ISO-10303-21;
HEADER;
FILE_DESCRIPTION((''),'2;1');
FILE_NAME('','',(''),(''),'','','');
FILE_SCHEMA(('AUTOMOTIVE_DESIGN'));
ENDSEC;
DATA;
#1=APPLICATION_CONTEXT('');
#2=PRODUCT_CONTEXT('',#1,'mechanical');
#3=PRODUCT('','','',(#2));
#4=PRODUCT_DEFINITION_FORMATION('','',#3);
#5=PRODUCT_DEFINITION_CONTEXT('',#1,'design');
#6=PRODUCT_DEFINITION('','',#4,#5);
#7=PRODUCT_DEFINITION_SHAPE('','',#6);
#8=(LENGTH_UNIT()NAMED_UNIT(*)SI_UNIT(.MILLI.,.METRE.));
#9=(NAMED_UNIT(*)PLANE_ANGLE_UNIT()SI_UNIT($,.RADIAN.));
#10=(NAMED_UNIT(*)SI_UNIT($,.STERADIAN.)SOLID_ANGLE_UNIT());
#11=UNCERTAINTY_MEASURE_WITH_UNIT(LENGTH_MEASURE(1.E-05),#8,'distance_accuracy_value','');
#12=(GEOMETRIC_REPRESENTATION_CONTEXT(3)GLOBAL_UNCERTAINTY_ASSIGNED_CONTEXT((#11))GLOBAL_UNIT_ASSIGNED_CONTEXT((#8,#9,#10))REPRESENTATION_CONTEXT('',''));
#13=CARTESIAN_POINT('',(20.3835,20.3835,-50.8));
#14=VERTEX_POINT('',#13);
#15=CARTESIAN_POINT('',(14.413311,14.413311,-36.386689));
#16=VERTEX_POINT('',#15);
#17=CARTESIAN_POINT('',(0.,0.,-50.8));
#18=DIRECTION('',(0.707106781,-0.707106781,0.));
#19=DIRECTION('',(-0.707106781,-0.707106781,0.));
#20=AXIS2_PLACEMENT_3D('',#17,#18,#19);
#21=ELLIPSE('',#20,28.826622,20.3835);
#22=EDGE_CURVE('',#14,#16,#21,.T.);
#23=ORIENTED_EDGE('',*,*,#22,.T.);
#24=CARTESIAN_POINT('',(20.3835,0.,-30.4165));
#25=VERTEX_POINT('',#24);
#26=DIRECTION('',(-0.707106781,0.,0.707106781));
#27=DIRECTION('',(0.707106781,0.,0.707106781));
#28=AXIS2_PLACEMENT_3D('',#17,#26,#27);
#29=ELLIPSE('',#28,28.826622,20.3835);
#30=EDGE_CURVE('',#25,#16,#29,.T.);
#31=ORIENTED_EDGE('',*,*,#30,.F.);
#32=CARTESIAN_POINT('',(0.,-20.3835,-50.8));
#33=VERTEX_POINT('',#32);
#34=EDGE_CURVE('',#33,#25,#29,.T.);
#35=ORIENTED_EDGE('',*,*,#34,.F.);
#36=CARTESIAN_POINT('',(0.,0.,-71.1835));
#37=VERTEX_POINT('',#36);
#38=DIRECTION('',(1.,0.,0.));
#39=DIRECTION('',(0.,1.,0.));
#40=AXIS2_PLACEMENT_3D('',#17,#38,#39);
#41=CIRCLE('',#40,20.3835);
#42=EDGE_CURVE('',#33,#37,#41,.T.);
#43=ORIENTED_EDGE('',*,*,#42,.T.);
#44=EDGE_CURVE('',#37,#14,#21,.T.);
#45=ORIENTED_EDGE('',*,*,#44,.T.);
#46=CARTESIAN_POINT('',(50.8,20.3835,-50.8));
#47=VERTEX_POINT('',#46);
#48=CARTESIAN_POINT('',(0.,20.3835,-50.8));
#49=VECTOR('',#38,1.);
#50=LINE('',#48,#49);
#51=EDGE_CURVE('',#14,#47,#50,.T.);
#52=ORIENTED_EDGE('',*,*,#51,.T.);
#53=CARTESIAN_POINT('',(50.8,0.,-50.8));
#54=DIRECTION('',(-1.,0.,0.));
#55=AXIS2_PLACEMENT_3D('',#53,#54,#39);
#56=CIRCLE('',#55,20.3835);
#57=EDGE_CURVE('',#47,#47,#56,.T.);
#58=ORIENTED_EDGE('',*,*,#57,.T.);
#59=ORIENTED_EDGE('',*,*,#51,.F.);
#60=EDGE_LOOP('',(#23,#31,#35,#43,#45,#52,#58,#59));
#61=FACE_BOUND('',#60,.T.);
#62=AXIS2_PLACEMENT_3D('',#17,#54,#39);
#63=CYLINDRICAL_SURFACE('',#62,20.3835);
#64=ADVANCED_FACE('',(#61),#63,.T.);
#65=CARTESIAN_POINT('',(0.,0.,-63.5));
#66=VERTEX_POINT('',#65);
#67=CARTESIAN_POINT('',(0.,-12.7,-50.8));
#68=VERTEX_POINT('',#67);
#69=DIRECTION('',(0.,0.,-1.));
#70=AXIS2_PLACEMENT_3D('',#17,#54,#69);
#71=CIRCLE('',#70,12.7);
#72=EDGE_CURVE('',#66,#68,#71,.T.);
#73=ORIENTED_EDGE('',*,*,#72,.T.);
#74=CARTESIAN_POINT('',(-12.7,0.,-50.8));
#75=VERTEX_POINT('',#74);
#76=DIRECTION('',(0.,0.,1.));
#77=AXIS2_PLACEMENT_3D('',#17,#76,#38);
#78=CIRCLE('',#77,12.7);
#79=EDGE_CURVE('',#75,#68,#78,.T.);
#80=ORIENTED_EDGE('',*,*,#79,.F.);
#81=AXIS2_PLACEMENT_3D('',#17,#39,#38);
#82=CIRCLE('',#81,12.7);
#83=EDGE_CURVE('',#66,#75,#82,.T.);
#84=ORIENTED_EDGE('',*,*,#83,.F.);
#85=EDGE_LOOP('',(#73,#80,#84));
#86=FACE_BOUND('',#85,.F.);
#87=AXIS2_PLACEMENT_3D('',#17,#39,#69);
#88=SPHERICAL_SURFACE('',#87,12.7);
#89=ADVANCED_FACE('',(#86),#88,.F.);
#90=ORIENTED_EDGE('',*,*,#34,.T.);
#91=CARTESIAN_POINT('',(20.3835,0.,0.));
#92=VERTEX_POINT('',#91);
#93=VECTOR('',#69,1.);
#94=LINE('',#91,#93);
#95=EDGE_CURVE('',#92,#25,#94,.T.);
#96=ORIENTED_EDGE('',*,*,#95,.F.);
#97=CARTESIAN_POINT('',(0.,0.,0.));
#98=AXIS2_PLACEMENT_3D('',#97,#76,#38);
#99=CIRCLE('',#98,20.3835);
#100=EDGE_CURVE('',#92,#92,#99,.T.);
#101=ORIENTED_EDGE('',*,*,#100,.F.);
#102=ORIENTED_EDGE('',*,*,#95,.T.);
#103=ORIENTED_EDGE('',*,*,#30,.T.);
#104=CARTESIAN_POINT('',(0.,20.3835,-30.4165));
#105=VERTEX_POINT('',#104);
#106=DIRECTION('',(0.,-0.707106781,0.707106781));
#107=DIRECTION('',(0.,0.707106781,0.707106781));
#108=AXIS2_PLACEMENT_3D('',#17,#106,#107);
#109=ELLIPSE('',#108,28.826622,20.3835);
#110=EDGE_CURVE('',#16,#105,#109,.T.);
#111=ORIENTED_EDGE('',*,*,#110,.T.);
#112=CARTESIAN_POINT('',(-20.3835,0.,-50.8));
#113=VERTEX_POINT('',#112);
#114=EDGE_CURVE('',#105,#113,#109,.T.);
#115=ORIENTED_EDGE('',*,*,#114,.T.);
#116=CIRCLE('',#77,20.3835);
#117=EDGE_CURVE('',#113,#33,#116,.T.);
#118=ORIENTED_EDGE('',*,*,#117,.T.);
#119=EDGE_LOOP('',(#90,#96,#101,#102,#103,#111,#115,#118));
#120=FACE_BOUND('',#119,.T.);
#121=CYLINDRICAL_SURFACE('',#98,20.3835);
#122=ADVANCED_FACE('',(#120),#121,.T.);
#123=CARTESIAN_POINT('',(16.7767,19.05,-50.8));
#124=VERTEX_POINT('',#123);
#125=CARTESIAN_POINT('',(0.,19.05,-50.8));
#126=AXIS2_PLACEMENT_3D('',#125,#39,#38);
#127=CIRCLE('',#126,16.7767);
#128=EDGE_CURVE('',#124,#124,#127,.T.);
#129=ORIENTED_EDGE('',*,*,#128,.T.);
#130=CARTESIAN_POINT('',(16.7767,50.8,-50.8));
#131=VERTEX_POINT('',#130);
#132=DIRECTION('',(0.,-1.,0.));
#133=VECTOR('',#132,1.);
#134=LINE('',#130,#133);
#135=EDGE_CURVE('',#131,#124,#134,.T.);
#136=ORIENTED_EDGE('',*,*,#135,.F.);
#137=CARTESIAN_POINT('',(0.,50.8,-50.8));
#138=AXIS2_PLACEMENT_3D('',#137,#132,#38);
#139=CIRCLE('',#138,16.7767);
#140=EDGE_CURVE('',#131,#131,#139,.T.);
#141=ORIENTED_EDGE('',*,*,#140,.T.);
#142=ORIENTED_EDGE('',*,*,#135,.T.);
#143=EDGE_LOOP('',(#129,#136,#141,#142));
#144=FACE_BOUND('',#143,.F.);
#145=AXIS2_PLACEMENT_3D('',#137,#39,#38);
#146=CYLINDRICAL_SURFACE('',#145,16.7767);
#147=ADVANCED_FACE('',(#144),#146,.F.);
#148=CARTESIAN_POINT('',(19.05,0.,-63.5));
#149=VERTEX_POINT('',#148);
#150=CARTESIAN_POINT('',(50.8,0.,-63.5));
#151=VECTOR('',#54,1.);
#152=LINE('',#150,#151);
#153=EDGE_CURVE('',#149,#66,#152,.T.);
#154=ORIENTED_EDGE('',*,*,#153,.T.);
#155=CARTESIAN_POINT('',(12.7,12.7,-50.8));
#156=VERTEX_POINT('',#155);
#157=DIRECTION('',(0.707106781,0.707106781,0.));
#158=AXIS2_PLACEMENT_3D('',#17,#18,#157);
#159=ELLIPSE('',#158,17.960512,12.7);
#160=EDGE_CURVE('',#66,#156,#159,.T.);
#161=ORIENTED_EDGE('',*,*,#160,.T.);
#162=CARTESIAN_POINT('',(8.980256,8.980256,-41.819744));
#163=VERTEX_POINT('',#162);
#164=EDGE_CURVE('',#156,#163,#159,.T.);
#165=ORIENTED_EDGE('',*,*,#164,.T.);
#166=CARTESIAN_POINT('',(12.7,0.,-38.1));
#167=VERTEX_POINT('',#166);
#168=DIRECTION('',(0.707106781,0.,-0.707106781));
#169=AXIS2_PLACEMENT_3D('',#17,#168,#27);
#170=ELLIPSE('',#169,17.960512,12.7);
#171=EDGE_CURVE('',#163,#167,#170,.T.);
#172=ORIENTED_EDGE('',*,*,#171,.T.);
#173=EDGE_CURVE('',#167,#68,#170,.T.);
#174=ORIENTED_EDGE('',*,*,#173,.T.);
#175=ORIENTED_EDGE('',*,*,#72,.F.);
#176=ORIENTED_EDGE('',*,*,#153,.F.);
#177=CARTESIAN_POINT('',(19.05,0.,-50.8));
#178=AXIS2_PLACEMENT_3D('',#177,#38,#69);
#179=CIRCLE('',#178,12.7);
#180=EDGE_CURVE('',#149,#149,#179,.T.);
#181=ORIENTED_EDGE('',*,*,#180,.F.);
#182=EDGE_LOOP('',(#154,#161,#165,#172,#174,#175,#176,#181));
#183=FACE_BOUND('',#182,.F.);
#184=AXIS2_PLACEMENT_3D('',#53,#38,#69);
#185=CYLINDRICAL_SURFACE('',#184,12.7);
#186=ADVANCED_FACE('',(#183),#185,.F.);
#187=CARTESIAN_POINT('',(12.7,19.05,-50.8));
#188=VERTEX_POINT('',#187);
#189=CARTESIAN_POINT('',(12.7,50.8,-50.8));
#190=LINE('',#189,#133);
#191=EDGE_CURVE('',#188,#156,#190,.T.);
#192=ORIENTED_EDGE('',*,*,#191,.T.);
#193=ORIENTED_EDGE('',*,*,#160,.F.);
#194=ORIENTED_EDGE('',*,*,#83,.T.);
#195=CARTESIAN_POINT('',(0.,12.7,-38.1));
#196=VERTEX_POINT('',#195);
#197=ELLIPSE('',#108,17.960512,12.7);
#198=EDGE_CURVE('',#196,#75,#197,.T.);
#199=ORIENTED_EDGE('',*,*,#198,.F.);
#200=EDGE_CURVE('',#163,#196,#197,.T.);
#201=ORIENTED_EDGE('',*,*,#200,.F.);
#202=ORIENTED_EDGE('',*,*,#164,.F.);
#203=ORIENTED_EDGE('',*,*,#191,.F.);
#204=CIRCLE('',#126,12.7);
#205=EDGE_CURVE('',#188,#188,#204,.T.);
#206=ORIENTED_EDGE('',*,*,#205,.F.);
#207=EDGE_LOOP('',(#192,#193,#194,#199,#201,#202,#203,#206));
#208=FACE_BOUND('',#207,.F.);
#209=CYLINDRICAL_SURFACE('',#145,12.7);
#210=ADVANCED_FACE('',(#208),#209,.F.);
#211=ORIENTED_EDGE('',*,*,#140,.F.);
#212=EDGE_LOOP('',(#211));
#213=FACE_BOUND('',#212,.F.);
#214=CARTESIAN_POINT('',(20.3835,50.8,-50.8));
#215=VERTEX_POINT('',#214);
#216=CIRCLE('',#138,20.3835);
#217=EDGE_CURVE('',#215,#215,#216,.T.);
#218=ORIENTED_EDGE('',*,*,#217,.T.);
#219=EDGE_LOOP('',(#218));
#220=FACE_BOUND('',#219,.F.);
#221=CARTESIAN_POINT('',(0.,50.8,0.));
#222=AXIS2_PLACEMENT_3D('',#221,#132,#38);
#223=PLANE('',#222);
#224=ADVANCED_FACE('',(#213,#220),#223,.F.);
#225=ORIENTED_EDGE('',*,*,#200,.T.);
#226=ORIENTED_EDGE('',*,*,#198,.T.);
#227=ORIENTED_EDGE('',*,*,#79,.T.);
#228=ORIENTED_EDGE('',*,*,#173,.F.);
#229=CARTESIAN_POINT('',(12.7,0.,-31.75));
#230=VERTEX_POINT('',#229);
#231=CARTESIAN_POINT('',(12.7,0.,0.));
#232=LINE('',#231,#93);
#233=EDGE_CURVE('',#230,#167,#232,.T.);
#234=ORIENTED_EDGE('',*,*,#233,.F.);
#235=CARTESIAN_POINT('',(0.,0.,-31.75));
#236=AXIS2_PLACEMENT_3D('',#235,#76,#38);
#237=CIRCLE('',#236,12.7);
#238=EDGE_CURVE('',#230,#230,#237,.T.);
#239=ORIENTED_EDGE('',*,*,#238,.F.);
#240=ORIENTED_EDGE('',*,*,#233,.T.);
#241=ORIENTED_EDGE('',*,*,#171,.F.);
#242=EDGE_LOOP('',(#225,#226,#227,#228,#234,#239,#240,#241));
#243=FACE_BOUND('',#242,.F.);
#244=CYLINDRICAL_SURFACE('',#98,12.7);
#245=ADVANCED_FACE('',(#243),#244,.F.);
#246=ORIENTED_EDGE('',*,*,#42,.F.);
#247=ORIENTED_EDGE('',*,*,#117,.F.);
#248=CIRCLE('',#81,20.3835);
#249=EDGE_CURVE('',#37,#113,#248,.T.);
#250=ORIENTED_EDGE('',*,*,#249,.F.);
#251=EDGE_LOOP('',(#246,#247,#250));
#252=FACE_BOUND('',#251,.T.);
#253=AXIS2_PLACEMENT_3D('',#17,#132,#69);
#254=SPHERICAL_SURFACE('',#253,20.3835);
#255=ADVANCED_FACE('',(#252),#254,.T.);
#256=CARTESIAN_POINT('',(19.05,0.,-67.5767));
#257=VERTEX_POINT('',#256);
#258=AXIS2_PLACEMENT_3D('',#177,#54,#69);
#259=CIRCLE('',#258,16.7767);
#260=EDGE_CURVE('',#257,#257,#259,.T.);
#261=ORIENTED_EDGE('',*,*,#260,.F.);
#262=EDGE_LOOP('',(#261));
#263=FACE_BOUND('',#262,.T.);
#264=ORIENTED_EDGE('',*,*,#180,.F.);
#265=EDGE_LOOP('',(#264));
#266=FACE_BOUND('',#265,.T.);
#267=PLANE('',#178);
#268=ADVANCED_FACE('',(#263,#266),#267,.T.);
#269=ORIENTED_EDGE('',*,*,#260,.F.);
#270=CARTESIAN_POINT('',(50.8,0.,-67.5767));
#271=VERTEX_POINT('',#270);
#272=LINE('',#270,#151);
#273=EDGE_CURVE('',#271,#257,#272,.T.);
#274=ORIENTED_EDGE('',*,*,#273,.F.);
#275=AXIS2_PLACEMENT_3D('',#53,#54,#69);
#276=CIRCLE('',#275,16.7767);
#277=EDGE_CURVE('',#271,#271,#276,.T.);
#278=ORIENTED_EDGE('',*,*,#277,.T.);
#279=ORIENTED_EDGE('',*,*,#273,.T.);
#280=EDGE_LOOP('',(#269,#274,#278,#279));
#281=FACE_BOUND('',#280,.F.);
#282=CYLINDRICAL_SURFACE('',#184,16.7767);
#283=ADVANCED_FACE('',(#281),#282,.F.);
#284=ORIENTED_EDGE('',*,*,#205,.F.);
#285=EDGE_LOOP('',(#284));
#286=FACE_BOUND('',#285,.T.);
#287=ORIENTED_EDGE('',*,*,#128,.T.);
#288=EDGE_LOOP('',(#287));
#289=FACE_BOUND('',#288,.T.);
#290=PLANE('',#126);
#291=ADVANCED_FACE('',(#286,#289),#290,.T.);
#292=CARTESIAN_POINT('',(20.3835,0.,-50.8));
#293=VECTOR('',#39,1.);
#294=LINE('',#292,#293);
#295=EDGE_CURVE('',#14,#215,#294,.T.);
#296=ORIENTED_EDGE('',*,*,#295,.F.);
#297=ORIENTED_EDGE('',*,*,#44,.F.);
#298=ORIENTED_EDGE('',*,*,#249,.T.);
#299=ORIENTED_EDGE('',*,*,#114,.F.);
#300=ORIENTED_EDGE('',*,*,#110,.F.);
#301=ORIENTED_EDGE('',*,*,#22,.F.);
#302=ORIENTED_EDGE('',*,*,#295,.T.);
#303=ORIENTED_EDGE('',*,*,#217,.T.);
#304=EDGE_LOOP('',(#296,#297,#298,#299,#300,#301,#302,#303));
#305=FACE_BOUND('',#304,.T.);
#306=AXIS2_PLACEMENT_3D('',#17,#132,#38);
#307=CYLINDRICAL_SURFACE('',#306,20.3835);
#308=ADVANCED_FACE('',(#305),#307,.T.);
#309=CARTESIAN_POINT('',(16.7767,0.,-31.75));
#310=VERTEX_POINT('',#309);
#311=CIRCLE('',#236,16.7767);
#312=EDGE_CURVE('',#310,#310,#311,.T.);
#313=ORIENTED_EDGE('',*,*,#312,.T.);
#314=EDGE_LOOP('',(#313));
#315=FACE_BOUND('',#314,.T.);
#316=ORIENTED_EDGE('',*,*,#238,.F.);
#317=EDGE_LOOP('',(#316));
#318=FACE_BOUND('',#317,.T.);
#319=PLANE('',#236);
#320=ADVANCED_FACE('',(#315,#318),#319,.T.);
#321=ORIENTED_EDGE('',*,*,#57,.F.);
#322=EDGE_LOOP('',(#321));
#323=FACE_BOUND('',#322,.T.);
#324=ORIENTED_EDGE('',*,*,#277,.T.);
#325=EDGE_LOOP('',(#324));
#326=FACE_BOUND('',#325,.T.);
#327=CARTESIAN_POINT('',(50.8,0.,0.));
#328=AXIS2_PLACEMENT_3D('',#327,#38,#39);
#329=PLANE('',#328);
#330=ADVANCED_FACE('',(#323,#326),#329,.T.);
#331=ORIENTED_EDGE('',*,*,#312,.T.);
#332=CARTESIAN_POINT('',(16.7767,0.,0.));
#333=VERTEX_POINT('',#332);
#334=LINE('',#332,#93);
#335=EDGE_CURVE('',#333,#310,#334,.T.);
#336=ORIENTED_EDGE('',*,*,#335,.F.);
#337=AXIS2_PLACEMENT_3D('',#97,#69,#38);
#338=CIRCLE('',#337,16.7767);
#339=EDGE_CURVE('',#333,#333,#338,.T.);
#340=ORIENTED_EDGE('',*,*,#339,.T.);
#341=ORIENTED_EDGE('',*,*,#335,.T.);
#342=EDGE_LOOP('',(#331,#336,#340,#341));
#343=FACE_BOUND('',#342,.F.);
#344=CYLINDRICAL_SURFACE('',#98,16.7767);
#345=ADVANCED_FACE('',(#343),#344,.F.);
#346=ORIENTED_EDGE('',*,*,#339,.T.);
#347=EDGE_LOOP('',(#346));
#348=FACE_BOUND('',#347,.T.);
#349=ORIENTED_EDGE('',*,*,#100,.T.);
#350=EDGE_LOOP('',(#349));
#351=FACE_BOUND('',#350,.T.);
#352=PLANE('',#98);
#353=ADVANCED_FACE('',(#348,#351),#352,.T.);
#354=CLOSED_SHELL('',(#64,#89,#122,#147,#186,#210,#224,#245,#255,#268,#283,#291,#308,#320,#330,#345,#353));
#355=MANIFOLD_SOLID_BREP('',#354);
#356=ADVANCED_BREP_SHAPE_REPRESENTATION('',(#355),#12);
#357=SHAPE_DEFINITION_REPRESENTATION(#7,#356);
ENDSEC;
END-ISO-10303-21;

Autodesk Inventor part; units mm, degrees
ref_plane "YZ Plane" through (0, 0, 0) normal (1, 0, 0) x (0, 1, 0)
sketch "Sketch18" plane through (0, 0, 0) normal (0, 0, 1) x (1, 0, 0)
  circle A0 centre (0, 0) radius 20.3835
  dimension "d50" = 40.767
extrude "Extrusion10" add sketch "Sketch18" against normal blind 50.8
sketch "Sketch24" plane through (0, 0, 0) normal (0, 0, 1) x (1, 0, 0)
  line L0 (0, 0) -> (20.3835, 0)
  circle A0 centre (0, 0) radius 20.3835 projected
  line L1 (0, 0) -> (0, 20.3835)
ref_plane "Work Plane16" through (0, 0, 0) normal (1, 0, 0) x (0, 1, 0)
ref_plane "Work Plane17" through (0, 0, 0) normal (0, -1, 0) x (1, 0, 0)
sketch "Sketch25" plane through (0, 0, 0) normal (1, 0, 0) x (0, 1, 0)
  line L0 (-20.3835, -50.8) -> (20.3835, -50.8) projected
  circle A0 centre (0, -50.8) radius 20.3835
  point P0 (0, 0)
  dimension "d67" = 40.767
sketch "Sketch26" plane through (0, 0, 0) normal (0, -1, 0) x (1, 0, 0)
  line L0 (-20.3835, -50.8) -> (20.3835, -50.8) projected
  circle A0 centre (0, -50.8) radius 20.3835
  point P0 (0, 0)
extrude "Extrusion14" add sketch "Sketch26" against normal blind 50.8
extrude "Extrusion15" add sketch "Sketch25" along normal blind 50.8
sketch "Sketch27" plane through (0, 0, 0) normal (-1, 0, 0) x (0, 0, 1)
  line L0 (-50.8, 0) -> (-50.8, -20.3835) projected
  line L1 (-50.8, 0) -> (-50.8, -20.3835)
  circle A0 centre (-50.8, 0) radius 20.3835 projected
  line L2 (-50.8, 0) -> (-71.1835, 0) projected
  line L3 (-50.8, 0) -> (-71.1835, 0)
  arc A1 (-71.1835, 0) -> (-50.8, -20.3835) centre (-50.8, 0) ccw
  point P0 (0, 0)
revolve "Revolution12" add sketch "Sketch27" angle 90 about axis through (0, 0, -50.8) along (0, 1, 0) picked at (-52.3119, -13.4186) contours L0 A0 L2
sketch "Sketch28" plane through (0, 0, 0) normal (0, 0, 1) x (1, 0, 0)
  line L0 (20.3835, 20.3835) -> (0, 0) projected
  circle A0 centre (0, 0) radius 12.7
  line L1 (0, 0) -> (0, -20.3835) projected
  circle A1 centre (0, 0) radius 16.7767
  point P0 (14.4133, 14.4133)
  dimension "d73" = 25.4
  dimension "d74" = 33.5534
sketch "Sketch29" plane through (0, 50.8, -50.8) normal (0, 1, 0) x (1, 0, 0)
  line L0 (0, 20.3835) -> (0, 0) projected
  circle A0 centre (0, 0) radius 12.7
  line L1 (0, 0) -> (-20.3835, 0) projected
  circle A1 centre (0, 0) radius 16.7767
  point P0 (0, -50.8)
  dimension "d75" = 25.4
  dimension "d76" = 33.5534
sketch "Sketch30" plane through (50.8, 0, -50.8) normal (1, 0, 0) x (0, 0, -1)
  circle A0 centre (0, 0) radius 20.3835 projected
  circle A1 centre (0, 0) radius 12.7
  line L0 (-20.3835, 20.3835) -> (0, 0) projected
  circle A2 centre (0, 0) radius 16.7767
  point P0 (-50.8, 0)
  point P1 (-14.4133, 14.4133)
  dimension "d77" = 25.4
  dimension "d78" = 33.5534
extrude "Extrusion16" cut sketch "Sketch30" against normal blind 50.8 contours A1
extrude "Extrusion17" cut sketch "Sketch28" against normal blind 50.8 contours A0 L1 L0 | L0 L1 A0
extrude "Extrusion18" cut sketch "Sketch29" against normal blind 50.8 contours A0 L1 L0 | L0 L1 A0
extrude "Extrusion19" cut sketch "Sketch30" against normal blind 31.75 contours A2
extrude "Extrusion20" cut sketch "Sketch28" against normal blind 31.75 contours A1 L1 A0 L0 | L0 A0 L1 A1
extrude "Extrusion21" cut sketch "Sketch29" against normal blind 31.75 contours A1 L1 A0 L0 | L0 A0 L1 A1
sketch "Sketch31" plane through (0, 0, -50.8) normal (1, 0, 0) x (0, 0, -1)
  line L0 (12.7, 0) -> (0, 0) projected
  line L1 (0, 0) -> (0, -12.7) projected
  arc A0 (0, -12.7) -> (12.7, 0) centre (0, 0) ccw projected
  point P0 (-50.8, 0)
revolve "Revolution13" cut sketch "Sketch31" angle 90 about axis through (0, 0, -50.8) along (0, 1, 0)
properties part number "3-way 90 1 Inch"
